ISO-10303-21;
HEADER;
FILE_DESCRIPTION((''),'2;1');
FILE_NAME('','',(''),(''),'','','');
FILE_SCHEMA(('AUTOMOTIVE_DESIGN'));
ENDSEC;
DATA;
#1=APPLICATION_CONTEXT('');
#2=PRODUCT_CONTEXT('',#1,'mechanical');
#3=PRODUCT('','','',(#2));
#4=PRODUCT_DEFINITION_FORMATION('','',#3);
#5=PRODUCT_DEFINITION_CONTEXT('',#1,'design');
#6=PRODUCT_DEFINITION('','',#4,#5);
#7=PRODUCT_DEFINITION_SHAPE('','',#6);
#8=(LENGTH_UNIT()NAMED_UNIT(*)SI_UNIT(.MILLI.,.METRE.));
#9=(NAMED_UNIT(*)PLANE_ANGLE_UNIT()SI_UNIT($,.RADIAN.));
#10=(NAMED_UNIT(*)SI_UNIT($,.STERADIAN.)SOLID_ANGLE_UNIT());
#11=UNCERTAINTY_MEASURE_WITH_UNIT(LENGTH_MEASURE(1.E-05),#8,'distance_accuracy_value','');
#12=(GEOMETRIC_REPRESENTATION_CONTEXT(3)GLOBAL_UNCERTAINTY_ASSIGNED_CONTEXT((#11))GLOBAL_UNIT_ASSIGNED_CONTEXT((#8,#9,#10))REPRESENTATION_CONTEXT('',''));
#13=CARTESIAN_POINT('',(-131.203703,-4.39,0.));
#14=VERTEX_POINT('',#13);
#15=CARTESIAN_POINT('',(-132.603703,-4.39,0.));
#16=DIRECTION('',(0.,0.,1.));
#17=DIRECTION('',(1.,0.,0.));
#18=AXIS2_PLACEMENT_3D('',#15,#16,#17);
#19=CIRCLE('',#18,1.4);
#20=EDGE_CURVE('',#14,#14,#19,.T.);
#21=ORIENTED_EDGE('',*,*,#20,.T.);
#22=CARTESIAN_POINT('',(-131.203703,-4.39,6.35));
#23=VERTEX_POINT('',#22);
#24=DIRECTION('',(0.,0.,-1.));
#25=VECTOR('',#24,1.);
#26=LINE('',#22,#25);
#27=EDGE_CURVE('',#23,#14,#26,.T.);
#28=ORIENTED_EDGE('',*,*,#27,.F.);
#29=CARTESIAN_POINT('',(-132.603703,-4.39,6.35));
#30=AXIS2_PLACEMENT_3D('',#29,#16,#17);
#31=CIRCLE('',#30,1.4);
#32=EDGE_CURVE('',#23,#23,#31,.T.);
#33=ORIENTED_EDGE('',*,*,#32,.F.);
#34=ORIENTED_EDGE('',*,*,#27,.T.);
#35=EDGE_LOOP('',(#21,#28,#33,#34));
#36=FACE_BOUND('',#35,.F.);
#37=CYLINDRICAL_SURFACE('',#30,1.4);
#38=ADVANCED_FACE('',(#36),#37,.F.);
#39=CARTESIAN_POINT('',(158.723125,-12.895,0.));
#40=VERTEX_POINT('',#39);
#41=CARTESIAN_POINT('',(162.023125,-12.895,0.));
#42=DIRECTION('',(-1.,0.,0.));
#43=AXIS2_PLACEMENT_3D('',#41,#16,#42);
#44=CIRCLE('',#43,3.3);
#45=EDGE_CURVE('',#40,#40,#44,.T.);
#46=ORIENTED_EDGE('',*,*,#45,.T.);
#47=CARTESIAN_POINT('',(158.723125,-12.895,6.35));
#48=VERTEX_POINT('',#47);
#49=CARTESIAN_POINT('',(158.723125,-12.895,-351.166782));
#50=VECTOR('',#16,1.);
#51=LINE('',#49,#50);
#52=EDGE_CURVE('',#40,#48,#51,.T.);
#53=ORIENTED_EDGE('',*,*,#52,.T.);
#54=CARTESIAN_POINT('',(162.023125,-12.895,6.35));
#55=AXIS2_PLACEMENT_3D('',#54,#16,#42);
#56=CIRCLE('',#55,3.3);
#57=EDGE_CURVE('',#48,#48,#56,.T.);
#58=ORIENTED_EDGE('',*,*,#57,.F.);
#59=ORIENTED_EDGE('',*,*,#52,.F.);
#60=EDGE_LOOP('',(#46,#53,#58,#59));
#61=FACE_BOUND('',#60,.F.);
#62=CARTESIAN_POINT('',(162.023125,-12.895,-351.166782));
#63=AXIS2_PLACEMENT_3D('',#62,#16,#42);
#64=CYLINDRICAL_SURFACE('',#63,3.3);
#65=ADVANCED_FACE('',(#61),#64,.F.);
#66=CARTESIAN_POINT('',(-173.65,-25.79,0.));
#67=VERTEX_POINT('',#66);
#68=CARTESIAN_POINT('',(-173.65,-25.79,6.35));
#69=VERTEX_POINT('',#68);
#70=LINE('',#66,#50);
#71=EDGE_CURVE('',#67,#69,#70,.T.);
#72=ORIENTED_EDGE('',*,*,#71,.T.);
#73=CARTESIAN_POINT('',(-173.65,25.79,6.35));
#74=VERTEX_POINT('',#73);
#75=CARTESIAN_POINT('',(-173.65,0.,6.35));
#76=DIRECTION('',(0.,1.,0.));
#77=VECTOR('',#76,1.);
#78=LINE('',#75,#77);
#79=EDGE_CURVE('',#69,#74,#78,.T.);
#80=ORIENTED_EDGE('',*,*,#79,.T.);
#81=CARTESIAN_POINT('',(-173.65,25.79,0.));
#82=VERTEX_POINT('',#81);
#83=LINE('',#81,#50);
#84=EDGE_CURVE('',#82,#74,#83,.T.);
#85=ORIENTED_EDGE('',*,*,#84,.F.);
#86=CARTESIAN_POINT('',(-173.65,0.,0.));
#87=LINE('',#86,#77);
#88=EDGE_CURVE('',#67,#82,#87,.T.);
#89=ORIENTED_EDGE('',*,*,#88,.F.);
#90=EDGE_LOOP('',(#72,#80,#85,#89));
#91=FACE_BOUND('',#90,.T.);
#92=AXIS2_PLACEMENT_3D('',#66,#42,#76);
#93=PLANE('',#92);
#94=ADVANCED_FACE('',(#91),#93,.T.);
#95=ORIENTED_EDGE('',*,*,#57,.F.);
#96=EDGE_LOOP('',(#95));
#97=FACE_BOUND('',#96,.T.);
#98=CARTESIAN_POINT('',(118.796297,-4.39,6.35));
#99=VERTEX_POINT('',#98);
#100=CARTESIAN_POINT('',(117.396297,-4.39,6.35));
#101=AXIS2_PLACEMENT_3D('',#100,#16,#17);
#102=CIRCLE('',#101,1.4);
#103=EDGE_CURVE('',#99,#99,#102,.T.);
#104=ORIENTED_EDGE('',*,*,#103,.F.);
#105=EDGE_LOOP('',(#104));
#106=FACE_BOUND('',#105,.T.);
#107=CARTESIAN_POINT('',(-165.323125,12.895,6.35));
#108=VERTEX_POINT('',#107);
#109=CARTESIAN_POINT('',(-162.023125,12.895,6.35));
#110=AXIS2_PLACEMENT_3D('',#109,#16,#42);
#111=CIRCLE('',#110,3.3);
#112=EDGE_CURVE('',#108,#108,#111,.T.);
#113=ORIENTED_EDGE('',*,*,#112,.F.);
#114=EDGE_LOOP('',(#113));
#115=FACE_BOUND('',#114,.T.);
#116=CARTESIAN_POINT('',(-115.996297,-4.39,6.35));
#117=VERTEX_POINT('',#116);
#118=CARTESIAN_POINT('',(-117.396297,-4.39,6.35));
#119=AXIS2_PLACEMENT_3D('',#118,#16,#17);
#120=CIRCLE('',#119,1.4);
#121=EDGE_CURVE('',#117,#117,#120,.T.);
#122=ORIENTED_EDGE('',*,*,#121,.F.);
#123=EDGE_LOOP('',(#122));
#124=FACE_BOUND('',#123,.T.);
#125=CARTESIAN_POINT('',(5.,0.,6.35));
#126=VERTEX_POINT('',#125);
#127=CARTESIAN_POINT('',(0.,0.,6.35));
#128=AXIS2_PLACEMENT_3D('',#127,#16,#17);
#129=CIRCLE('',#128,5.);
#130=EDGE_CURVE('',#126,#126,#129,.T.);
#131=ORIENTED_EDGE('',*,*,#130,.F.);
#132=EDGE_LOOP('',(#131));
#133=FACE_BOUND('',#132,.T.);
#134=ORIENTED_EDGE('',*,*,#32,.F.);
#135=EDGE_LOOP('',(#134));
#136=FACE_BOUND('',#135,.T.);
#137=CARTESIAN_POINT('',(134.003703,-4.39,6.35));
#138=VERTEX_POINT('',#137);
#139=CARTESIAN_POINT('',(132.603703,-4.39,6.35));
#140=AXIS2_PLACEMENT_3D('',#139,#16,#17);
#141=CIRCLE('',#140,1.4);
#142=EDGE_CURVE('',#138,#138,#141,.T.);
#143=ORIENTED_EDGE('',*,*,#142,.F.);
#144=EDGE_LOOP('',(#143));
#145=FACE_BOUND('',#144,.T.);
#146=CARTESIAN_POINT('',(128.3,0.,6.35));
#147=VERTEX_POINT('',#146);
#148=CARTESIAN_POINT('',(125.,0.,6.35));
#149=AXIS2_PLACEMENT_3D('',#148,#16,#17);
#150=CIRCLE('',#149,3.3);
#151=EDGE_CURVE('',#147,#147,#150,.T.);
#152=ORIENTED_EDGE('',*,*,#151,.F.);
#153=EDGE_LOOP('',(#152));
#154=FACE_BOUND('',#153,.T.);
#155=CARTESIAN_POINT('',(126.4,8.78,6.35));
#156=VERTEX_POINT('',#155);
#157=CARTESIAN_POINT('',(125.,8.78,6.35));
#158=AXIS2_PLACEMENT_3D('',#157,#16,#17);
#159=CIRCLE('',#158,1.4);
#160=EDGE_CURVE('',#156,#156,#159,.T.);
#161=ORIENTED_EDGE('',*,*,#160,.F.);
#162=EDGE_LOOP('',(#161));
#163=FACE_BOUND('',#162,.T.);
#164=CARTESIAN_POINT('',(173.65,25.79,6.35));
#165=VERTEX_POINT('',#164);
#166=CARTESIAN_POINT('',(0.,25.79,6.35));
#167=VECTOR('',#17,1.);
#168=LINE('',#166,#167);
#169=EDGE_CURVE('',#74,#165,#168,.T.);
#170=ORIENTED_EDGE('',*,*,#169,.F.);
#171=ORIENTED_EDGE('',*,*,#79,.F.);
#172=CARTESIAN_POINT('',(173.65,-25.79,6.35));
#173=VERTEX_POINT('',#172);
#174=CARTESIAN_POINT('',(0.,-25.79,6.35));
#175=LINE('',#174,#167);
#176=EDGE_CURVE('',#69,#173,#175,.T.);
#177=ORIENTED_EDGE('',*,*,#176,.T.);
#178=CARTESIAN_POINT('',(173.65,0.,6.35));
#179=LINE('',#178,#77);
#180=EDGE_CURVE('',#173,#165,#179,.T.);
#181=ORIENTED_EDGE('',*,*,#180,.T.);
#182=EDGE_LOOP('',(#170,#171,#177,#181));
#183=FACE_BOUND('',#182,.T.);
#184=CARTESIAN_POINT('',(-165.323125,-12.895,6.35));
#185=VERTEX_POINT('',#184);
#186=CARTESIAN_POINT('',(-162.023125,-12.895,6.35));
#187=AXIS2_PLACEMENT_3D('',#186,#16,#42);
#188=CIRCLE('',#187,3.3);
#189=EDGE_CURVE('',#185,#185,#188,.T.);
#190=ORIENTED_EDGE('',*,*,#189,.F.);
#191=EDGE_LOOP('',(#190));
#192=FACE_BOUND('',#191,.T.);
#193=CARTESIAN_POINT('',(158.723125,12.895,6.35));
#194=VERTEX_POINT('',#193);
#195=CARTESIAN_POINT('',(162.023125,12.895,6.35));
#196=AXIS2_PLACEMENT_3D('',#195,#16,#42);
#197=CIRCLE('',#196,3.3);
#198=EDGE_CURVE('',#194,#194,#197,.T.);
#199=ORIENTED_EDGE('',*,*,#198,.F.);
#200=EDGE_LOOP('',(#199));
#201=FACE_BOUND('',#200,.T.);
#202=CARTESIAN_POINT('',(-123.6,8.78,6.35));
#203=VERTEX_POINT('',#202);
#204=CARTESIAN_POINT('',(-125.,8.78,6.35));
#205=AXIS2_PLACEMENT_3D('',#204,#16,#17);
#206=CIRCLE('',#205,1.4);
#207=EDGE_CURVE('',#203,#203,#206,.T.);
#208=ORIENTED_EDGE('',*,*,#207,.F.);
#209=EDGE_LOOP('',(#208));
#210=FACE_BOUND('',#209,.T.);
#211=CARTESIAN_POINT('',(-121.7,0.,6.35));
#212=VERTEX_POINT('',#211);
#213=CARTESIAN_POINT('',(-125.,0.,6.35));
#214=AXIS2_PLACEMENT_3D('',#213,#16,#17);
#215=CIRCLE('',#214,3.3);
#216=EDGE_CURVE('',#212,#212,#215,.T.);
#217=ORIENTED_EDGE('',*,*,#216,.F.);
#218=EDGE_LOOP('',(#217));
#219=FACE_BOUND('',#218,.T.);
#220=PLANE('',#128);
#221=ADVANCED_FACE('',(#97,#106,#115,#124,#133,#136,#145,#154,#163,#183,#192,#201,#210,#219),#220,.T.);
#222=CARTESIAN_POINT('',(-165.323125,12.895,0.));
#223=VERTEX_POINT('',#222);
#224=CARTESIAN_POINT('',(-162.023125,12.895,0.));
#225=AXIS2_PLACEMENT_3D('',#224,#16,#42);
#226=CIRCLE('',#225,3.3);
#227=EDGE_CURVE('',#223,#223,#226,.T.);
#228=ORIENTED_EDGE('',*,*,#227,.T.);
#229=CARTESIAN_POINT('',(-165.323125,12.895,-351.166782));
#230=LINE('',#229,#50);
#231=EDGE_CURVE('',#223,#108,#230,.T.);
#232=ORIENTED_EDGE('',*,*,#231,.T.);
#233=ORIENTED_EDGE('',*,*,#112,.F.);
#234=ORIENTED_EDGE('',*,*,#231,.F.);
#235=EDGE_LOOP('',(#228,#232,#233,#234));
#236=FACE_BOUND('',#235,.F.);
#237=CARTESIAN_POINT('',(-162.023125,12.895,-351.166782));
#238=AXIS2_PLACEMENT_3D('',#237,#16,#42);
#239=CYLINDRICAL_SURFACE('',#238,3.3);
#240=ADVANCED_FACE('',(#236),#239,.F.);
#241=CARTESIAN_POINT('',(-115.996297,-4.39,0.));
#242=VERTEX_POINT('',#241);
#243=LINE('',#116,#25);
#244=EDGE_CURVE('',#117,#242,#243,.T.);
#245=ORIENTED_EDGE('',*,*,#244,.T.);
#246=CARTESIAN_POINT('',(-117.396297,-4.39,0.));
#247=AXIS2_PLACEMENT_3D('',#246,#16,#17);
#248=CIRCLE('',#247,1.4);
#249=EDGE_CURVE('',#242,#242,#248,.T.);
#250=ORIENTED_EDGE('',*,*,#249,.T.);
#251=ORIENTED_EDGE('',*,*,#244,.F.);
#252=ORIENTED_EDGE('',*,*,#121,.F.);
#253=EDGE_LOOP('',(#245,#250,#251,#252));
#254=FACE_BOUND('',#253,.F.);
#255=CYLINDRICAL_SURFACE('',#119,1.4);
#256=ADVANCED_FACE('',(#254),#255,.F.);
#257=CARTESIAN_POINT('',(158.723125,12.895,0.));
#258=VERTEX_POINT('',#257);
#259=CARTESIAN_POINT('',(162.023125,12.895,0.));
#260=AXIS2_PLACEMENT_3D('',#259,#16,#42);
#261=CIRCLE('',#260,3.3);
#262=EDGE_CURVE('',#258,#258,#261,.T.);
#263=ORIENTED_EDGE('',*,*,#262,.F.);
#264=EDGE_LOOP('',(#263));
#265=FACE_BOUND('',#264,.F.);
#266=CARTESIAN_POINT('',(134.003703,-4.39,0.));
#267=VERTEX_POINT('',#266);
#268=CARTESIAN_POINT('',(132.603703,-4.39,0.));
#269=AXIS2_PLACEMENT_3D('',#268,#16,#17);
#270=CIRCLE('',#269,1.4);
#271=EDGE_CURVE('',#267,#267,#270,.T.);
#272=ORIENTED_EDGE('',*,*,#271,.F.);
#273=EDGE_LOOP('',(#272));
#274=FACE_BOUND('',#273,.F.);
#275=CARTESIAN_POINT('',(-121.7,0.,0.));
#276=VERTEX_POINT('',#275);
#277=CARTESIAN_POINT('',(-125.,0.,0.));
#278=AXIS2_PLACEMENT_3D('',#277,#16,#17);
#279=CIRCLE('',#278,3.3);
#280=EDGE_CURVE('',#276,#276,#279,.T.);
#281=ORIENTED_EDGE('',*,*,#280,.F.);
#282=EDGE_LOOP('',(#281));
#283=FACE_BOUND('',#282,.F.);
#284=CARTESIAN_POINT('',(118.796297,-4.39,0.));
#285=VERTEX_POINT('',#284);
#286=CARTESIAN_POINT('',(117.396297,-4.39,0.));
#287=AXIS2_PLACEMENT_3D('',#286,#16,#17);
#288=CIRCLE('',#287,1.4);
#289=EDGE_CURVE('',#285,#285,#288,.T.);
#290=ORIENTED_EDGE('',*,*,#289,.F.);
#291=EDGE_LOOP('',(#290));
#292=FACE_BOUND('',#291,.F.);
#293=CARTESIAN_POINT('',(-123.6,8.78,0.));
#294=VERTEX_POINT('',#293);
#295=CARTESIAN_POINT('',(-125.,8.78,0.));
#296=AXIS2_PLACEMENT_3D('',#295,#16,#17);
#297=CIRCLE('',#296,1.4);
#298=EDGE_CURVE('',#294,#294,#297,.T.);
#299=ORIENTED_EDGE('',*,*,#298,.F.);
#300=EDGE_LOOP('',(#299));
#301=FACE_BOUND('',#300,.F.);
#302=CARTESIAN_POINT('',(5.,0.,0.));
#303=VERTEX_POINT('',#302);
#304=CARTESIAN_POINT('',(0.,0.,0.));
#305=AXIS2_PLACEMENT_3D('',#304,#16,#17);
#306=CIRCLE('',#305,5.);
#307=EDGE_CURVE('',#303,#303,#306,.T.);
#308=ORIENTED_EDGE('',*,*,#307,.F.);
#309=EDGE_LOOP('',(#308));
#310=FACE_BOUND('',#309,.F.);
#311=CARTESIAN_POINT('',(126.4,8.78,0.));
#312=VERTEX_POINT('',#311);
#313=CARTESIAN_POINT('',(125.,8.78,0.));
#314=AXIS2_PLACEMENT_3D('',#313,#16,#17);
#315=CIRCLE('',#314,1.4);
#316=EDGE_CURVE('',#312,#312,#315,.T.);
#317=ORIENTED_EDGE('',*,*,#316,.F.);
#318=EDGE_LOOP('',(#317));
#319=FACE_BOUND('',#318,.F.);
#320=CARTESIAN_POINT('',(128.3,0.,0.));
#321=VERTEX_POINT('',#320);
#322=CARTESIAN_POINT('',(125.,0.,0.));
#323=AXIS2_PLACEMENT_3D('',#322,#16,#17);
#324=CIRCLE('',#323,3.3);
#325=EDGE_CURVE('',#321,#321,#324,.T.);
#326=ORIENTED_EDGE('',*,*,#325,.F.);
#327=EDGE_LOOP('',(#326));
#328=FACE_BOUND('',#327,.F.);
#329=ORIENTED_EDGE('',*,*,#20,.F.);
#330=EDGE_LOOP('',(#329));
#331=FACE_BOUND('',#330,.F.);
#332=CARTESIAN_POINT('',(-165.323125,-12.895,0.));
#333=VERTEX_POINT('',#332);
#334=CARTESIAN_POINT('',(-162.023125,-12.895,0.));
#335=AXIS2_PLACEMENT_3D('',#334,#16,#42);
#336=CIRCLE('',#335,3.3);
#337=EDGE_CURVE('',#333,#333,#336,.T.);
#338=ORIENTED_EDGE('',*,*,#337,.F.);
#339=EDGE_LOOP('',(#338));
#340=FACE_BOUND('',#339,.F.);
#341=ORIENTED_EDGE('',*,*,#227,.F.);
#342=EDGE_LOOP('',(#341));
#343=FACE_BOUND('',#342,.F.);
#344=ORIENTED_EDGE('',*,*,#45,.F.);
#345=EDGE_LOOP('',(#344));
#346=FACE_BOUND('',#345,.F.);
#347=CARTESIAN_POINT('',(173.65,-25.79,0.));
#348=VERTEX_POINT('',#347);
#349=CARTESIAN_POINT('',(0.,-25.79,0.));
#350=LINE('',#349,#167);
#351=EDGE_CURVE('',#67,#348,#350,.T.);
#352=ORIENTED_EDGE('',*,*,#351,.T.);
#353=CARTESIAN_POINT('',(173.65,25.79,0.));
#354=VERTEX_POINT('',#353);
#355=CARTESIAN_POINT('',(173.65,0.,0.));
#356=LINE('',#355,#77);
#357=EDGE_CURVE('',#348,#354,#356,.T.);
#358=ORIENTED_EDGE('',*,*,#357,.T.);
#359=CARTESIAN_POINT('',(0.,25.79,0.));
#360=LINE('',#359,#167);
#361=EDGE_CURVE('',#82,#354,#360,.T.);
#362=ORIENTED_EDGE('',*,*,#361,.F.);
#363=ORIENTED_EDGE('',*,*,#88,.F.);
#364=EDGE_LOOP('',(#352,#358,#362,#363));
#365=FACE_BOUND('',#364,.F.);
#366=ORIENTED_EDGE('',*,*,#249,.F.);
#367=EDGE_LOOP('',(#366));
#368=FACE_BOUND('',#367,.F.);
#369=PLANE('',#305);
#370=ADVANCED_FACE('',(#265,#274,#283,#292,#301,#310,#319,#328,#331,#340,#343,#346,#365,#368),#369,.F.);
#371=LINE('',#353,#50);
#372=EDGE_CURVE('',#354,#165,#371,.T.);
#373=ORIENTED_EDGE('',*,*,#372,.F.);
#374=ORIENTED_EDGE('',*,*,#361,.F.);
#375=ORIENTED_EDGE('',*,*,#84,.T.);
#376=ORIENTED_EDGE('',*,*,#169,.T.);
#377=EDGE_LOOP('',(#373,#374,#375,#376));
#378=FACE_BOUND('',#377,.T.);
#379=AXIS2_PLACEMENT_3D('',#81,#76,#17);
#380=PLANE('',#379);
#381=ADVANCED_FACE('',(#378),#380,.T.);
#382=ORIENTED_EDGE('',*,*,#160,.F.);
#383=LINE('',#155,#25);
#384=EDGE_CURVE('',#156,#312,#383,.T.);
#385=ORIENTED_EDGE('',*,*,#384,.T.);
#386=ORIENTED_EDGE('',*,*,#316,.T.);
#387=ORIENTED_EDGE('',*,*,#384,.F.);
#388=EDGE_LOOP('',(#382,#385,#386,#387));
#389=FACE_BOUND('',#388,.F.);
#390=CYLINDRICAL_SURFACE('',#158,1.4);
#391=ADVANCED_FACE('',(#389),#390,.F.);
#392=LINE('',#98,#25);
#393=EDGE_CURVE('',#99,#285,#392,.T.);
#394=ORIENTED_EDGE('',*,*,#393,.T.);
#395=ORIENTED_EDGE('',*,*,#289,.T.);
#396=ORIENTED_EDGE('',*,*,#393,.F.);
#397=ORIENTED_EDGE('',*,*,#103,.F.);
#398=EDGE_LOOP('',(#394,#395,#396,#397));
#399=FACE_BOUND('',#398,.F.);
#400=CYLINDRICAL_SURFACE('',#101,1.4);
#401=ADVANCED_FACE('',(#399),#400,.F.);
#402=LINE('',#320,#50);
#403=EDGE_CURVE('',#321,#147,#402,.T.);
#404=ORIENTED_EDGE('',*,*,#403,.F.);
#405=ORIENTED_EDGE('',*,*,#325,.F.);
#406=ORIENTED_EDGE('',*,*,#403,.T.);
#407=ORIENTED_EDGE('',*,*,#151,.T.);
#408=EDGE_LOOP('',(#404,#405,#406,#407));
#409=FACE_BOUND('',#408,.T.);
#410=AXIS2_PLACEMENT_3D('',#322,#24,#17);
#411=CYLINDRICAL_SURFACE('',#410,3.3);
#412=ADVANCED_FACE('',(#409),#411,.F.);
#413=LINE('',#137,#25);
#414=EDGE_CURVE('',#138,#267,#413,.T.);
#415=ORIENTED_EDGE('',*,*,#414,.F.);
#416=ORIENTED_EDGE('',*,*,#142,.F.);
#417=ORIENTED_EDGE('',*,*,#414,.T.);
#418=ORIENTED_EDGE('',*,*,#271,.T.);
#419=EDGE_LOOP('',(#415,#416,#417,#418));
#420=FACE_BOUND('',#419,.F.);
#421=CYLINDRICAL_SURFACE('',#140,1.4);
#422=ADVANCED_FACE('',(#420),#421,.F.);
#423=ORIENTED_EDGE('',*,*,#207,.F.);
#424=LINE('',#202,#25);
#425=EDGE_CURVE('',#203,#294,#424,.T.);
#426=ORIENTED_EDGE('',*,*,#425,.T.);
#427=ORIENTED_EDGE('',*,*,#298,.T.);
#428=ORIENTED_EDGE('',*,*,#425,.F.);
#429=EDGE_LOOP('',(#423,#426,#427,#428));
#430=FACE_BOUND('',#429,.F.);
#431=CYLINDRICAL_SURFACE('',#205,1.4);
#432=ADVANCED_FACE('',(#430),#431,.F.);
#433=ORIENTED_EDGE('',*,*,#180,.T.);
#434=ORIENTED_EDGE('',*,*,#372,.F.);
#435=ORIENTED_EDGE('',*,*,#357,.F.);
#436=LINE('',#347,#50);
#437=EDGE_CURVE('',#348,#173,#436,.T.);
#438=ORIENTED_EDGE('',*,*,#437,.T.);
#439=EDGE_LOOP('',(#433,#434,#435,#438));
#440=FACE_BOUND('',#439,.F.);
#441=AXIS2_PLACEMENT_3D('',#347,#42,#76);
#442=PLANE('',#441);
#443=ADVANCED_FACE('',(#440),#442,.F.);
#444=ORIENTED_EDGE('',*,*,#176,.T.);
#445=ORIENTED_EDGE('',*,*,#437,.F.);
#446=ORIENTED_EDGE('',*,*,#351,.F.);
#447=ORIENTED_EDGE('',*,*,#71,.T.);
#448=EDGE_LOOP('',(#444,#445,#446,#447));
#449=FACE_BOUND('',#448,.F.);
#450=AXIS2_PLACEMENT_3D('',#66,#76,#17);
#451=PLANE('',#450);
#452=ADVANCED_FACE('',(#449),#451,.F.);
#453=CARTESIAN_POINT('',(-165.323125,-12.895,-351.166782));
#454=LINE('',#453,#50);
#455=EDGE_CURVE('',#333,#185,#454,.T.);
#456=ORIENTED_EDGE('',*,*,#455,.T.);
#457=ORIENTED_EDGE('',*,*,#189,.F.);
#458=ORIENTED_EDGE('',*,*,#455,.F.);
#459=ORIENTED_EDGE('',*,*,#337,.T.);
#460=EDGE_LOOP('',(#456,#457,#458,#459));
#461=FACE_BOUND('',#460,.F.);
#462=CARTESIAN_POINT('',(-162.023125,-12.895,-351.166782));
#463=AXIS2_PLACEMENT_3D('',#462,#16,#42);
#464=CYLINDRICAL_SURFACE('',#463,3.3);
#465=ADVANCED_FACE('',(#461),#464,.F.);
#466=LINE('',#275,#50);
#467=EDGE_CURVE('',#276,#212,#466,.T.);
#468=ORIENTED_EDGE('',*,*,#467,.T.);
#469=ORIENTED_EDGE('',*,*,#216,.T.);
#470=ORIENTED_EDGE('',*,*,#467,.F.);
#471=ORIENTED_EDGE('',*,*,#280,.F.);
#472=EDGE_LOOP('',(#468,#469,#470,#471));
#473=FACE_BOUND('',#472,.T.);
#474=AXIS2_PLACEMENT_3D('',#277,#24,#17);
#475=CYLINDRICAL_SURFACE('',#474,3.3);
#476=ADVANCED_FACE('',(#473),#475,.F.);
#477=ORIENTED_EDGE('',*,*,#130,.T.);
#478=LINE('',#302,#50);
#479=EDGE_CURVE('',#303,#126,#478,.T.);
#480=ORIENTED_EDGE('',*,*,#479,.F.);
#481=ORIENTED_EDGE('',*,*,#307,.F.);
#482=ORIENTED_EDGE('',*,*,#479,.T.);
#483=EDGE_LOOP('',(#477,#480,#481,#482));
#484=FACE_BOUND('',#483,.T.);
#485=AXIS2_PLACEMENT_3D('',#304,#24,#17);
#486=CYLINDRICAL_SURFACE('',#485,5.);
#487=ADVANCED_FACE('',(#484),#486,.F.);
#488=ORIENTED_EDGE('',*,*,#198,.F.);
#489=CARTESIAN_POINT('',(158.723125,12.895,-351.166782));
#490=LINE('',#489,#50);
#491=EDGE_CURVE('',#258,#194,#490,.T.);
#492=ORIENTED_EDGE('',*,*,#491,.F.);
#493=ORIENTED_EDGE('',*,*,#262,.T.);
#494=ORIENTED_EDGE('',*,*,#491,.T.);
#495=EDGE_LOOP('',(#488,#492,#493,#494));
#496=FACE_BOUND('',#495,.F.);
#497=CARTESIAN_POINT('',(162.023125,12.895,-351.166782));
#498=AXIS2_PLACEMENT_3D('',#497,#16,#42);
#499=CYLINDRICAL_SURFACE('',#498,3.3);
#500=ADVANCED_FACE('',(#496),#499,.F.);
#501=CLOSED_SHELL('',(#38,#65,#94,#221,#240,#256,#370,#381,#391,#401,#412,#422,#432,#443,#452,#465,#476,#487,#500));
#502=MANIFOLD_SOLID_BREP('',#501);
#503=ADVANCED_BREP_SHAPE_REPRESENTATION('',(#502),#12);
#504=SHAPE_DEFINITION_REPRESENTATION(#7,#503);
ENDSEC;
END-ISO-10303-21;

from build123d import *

# Parameters (mm, degrees)
F0_W     = 347.3
F0_H     = 51.58
F0_R     = 3.3
F0_R_2   = 5
F1_DEPTH = 6.35
F3_D     = 6.6
F4_R     = 1.4
F5_DEPTH = 6.351


# Not quite as in the source:
# - a feature names something its author has since deleted; it is built from what else it names


with BuildPart() as f1:
    # F0 (on Top) → F1 (new body)
    with BuildSketch(Plane.XY):
        Rectangle(F0_W, F0_H)
        with Locations((-125, 0)):
            Circle(F0_R, mode=Mode.SUBTRACT)
        Circle(F0_R_2, mode=Mode.SUBTRACT)
        with Locations((125, 0)):
            Circle(F0_R, mode=Mode.SUBTRACT)
    extrude(amount=F1_DEPTH)

    # F3 (through all)
    with Locations(Plane(origin=(0, 0, 0), x_dir=(1, 0, 0), z_dir=(0, 0, -1))):
        with Locations((-162.023125, 12.895), (-162.023125, -12.895), (162.023125, -12.895), (162.023125, 12.895)):
            Hole(F3_D / 2)

    # F4 (on face) → F5 (cut, through all)
    with BuildSketch(Plane.XY.offset(6.35)):
        with Locations((-125, 8.78)):
            Circle(F4_R)
        with Locations((-132.6037030452, -4.39)):
            Circle(F4_R)
        with Locations((-117.3962969548, -4.39)):
            Circle(F4_R)
        with Locations((125, 8.78)):
            Circle(F4_R)
        with Locations((132.6037030452, -4.39)):
            Circle(F4_R)
        with Locations((117.3962969548, -4.39)):
            Circle(F4_R)
    extrude(amount=-F5_DEPTH, mode=Mode.SUBTRACT)


solid = f1.part
